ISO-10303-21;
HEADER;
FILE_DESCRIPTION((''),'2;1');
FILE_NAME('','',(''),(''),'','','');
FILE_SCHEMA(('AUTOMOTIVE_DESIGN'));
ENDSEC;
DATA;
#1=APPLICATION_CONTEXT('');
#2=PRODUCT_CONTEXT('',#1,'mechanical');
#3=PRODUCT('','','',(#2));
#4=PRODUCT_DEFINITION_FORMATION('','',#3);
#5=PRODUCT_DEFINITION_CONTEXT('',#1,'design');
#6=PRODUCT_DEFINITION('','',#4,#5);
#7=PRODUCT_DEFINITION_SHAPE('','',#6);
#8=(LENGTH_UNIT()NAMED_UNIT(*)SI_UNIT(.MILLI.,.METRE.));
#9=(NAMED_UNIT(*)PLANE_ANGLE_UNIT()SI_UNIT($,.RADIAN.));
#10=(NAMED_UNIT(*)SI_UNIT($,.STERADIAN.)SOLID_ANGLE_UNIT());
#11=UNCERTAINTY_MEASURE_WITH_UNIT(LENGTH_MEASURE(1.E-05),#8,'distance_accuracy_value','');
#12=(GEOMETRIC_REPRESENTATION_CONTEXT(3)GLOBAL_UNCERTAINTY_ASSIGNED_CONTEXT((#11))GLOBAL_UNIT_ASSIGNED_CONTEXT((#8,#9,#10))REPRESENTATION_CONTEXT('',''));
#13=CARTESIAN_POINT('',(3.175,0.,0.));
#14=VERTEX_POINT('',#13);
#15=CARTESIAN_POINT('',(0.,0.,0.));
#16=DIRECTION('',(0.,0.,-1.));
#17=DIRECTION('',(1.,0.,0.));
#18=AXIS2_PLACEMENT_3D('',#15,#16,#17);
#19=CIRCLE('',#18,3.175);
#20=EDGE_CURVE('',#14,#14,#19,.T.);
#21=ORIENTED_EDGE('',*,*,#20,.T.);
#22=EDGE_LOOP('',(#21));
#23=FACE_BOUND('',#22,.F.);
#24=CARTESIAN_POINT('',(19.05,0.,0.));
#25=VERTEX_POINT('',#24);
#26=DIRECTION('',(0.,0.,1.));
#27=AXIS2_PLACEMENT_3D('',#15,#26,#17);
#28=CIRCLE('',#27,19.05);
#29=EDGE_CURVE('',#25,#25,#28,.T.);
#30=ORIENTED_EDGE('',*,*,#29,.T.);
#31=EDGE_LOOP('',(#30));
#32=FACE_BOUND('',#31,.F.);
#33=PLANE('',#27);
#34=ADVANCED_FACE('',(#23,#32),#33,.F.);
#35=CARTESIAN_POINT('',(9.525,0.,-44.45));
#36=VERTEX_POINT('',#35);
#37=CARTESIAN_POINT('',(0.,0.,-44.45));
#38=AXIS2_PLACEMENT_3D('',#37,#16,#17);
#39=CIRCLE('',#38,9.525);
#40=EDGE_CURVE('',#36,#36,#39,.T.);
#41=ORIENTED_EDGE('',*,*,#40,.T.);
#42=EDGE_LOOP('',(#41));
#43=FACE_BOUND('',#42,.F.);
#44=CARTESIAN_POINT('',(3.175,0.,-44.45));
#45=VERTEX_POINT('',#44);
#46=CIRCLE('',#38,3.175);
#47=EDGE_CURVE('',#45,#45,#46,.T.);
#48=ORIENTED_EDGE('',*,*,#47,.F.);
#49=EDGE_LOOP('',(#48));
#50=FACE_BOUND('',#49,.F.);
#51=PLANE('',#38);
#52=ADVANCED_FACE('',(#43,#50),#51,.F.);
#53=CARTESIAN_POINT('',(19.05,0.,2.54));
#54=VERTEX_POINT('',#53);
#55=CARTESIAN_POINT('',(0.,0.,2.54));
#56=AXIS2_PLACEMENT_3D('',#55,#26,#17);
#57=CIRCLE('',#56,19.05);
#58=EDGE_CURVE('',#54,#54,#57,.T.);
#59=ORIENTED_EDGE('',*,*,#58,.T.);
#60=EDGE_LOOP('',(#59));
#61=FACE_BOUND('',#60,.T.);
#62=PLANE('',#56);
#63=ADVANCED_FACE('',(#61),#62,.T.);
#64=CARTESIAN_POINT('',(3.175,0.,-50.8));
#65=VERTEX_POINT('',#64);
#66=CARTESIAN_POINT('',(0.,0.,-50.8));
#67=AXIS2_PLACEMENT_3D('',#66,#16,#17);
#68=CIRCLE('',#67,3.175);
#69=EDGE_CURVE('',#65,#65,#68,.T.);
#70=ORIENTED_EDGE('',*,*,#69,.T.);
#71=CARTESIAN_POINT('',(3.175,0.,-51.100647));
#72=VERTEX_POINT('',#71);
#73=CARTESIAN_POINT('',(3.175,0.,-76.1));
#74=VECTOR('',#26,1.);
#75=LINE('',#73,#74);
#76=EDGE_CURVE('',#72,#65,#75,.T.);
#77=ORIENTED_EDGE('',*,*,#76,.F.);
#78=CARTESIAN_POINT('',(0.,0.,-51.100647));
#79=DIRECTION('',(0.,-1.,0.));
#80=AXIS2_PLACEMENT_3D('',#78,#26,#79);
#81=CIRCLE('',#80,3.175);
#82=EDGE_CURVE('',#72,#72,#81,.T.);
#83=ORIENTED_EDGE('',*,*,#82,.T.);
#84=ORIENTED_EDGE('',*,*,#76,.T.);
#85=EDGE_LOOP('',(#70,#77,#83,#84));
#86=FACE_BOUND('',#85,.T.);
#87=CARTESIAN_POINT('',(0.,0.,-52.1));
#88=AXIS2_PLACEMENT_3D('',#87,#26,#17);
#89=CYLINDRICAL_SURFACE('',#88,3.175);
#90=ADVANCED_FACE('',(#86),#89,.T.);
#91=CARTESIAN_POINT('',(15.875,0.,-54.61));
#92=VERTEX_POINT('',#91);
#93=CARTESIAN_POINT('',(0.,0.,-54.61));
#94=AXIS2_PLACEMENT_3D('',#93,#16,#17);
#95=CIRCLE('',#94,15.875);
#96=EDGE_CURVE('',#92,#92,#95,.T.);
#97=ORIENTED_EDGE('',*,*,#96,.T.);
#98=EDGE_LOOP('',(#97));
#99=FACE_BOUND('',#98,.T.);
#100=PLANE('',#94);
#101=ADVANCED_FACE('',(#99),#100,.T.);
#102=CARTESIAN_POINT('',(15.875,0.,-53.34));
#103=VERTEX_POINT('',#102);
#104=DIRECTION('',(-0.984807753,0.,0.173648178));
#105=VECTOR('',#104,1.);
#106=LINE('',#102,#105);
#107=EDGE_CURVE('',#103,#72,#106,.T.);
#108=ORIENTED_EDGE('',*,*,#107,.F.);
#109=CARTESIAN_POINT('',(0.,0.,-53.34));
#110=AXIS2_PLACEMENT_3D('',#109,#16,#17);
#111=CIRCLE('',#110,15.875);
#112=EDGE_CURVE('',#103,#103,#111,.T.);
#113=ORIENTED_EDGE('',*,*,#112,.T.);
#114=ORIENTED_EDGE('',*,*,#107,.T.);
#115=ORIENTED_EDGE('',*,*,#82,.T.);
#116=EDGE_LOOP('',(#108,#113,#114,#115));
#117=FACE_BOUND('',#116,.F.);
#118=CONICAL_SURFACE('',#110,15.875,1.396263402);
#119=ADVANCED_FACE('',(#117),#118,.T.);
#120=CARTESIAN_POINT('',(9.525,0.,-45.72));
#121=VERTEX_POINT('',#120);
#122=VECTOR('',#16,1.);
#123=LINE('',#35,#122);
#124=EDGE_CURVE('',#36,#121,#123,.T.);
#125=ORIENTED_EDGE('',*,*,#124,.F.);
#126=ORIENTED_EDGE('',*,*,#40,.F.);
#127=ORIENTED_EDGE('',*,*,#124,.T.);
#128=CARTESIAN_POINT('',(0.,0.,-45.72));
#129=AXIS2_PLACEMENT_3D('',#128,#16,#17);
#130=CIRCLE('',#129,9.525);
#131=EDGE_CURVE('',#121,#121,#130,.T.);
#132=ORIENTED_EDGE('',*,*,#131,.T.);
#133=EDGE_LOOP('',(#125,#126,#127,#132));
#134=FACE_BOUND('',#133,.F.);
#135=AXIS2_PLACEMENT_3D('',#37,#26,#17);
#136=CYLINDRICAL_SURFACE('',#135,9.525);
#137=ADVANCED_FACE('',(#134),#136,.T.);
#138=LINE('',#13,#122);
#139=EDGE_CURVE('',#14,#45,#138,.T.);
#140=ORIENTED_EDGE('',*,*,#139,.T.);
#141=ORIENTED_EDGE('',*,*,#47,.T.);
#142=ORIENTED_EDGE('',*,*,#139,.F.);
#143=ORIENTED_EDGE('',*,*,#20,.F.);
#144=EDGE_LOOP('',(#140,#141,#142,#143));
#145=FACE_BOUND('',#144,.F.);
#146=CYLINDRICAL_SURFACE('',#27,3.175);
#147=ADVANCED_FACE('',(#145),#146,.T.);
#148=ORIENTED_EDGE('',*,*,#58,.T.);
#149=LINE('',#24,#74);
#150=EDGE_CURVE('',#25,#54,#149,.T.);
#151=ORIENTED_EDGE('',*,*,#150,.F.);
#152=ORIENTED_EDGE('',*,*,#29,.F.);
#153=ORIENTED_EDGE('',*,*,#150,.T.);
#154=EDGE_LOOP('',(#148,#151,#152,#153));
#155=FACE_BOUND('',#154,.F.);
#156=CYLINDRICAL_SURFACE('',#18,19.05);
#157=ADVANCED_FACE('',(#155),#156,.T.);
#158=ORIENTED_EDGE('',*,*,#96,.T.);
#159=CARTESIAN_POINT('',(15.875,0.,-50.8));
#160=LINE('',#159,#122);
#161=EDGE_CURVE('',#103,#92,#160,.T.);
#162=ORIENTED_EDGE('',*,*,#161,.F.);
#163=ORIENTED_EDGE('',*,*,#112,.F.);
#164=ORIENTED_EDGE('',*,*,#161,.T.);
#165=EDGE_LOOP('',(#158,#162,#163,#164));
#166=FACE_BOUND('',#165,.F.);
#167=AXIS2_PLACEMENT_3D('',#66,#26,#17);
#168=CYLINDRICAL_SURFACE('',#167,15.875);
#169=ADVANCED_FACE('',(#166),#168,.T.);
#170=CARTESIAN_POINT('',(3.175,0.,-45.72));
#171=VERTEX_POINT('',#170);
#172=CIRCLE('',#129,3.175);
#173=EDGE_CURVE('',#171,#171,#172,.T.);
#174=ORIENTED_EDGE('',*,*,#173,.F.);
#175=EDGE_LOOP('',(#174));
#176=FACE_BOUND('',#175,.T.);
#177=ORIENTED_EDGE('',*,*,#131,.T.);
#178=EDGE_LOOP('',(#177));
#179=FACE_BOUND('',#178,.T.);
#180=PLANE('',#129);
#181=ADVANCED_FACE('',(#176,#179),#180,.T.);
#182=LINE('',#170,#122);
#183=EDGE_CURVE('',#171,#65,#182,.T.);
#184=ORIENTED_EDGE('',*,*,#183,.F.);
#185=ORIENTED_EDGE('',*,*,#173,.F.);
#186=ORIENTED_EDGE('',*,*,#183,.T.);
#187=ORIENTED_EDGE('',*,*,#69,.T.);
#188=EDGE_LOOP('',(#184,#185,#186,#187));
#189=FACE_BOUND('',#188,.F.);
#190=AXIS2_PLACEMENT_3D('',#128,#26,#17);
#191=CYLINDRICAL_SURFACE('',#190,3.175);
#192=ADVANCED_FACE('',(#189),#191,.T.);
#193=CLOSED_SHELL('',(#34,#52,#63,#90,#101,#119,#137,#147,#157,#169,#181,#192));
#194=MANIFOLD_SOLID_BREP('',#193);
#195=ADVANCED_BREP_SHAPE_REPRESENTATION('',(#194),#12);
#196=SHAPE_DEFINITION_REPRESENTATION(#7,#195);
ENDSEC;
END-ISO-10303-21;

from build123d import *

# Parameters (mm, degrees)
F0_R         = 19.05
F1_DEPTH     = 2.54
F2_R         = 3.175
F3_DEPTH     = 44.45
F4_R         = 9.525
F5_DEPTH     = 1.27
F6_R         = 3.175
F7_DEPTH     = 5.08
F8_R         = 15.875
F9_DEPTH     = 3.81
F10_S5_R     = 3.175
F10_T6_DEPTH = 24


# Not quite as in the source:
# - a fillet or chamfer that OpenCascade refuses, or shapes differently, is made with other operations: its cross-section is extruded or revolved along the edge and cut away or added


with BuildPart() as f1:
    # F0 (on Top) → F1 (new body)
    with BuildSketch(Plane.XY):
        Circle(F0_R)
    extrude(amount=F1_DEPTH)

    # F2 (on face) → F3 (join)
    with BuildSketch(Plane(origin=(0, 0, 0), x_dir=(1, 0, 0), z_dir=(0, 0, -1))):
        Circle(F2_R)
    extrude(amount=F3_DEPTH)

    # F4 (on face) → F5 (join)
    with BuildSketch(Plane(origin=(0, 0, -44.45), x_dir=(1, 0, 0), z_dir=(0, 0, -1))):
        Circle(F4_R)
    extrude(amount=F5_DEPTH)

    # F6 (on face) → F7 (join)
    with BuildSketch(Plane(origin=(0, 0, -45.72), x_dir=(1, 0, 0), z_dir=(0, 0, -1))):
        Circle(F6_R)
    extrude(amount=F7_DEPTH)

    # F8 (on face) → F9 (join)
    with BuildSketch(Plane(origin=(0, 0, -50.8), x_dir=(1, 0, 0), z_dir=(0, 0, -1))):
        Circle(F8_R)
    extrude(amount=F9_DEPTH)

    # F10: chamfer of 2.54 x 14.4050558218 on 1 edges, made by hand


with BuildPart() as f10_tool2:
    # F10_s3 → F10_t4 (revolve)
    with BuildSketch(Plane.XZ):
        Polygon((15.875, -53.34), (1.4699441782, -50.8), (15.875, -50.8), align=None)
    revolve(axis=Axis((0, 0, -50.8), (0, 0, -1)))

    # F10_s5 → F10_t6 (cut, symmetric)
    with BuildSketch(Plane.XY.offset(-52.1)):
        Circle(F10_S5_R)
    extrude(amount=F10_T6_DEPTH, both=True, mode=Mode.SUBTRACT)


with BuildPart() as f1_1:
    add(f1.part)

    # F10_t1: cut F10_tool2
    add(f10_tool2.part, mode=Mode.SUBTRACT)


solid = f1_1.part
